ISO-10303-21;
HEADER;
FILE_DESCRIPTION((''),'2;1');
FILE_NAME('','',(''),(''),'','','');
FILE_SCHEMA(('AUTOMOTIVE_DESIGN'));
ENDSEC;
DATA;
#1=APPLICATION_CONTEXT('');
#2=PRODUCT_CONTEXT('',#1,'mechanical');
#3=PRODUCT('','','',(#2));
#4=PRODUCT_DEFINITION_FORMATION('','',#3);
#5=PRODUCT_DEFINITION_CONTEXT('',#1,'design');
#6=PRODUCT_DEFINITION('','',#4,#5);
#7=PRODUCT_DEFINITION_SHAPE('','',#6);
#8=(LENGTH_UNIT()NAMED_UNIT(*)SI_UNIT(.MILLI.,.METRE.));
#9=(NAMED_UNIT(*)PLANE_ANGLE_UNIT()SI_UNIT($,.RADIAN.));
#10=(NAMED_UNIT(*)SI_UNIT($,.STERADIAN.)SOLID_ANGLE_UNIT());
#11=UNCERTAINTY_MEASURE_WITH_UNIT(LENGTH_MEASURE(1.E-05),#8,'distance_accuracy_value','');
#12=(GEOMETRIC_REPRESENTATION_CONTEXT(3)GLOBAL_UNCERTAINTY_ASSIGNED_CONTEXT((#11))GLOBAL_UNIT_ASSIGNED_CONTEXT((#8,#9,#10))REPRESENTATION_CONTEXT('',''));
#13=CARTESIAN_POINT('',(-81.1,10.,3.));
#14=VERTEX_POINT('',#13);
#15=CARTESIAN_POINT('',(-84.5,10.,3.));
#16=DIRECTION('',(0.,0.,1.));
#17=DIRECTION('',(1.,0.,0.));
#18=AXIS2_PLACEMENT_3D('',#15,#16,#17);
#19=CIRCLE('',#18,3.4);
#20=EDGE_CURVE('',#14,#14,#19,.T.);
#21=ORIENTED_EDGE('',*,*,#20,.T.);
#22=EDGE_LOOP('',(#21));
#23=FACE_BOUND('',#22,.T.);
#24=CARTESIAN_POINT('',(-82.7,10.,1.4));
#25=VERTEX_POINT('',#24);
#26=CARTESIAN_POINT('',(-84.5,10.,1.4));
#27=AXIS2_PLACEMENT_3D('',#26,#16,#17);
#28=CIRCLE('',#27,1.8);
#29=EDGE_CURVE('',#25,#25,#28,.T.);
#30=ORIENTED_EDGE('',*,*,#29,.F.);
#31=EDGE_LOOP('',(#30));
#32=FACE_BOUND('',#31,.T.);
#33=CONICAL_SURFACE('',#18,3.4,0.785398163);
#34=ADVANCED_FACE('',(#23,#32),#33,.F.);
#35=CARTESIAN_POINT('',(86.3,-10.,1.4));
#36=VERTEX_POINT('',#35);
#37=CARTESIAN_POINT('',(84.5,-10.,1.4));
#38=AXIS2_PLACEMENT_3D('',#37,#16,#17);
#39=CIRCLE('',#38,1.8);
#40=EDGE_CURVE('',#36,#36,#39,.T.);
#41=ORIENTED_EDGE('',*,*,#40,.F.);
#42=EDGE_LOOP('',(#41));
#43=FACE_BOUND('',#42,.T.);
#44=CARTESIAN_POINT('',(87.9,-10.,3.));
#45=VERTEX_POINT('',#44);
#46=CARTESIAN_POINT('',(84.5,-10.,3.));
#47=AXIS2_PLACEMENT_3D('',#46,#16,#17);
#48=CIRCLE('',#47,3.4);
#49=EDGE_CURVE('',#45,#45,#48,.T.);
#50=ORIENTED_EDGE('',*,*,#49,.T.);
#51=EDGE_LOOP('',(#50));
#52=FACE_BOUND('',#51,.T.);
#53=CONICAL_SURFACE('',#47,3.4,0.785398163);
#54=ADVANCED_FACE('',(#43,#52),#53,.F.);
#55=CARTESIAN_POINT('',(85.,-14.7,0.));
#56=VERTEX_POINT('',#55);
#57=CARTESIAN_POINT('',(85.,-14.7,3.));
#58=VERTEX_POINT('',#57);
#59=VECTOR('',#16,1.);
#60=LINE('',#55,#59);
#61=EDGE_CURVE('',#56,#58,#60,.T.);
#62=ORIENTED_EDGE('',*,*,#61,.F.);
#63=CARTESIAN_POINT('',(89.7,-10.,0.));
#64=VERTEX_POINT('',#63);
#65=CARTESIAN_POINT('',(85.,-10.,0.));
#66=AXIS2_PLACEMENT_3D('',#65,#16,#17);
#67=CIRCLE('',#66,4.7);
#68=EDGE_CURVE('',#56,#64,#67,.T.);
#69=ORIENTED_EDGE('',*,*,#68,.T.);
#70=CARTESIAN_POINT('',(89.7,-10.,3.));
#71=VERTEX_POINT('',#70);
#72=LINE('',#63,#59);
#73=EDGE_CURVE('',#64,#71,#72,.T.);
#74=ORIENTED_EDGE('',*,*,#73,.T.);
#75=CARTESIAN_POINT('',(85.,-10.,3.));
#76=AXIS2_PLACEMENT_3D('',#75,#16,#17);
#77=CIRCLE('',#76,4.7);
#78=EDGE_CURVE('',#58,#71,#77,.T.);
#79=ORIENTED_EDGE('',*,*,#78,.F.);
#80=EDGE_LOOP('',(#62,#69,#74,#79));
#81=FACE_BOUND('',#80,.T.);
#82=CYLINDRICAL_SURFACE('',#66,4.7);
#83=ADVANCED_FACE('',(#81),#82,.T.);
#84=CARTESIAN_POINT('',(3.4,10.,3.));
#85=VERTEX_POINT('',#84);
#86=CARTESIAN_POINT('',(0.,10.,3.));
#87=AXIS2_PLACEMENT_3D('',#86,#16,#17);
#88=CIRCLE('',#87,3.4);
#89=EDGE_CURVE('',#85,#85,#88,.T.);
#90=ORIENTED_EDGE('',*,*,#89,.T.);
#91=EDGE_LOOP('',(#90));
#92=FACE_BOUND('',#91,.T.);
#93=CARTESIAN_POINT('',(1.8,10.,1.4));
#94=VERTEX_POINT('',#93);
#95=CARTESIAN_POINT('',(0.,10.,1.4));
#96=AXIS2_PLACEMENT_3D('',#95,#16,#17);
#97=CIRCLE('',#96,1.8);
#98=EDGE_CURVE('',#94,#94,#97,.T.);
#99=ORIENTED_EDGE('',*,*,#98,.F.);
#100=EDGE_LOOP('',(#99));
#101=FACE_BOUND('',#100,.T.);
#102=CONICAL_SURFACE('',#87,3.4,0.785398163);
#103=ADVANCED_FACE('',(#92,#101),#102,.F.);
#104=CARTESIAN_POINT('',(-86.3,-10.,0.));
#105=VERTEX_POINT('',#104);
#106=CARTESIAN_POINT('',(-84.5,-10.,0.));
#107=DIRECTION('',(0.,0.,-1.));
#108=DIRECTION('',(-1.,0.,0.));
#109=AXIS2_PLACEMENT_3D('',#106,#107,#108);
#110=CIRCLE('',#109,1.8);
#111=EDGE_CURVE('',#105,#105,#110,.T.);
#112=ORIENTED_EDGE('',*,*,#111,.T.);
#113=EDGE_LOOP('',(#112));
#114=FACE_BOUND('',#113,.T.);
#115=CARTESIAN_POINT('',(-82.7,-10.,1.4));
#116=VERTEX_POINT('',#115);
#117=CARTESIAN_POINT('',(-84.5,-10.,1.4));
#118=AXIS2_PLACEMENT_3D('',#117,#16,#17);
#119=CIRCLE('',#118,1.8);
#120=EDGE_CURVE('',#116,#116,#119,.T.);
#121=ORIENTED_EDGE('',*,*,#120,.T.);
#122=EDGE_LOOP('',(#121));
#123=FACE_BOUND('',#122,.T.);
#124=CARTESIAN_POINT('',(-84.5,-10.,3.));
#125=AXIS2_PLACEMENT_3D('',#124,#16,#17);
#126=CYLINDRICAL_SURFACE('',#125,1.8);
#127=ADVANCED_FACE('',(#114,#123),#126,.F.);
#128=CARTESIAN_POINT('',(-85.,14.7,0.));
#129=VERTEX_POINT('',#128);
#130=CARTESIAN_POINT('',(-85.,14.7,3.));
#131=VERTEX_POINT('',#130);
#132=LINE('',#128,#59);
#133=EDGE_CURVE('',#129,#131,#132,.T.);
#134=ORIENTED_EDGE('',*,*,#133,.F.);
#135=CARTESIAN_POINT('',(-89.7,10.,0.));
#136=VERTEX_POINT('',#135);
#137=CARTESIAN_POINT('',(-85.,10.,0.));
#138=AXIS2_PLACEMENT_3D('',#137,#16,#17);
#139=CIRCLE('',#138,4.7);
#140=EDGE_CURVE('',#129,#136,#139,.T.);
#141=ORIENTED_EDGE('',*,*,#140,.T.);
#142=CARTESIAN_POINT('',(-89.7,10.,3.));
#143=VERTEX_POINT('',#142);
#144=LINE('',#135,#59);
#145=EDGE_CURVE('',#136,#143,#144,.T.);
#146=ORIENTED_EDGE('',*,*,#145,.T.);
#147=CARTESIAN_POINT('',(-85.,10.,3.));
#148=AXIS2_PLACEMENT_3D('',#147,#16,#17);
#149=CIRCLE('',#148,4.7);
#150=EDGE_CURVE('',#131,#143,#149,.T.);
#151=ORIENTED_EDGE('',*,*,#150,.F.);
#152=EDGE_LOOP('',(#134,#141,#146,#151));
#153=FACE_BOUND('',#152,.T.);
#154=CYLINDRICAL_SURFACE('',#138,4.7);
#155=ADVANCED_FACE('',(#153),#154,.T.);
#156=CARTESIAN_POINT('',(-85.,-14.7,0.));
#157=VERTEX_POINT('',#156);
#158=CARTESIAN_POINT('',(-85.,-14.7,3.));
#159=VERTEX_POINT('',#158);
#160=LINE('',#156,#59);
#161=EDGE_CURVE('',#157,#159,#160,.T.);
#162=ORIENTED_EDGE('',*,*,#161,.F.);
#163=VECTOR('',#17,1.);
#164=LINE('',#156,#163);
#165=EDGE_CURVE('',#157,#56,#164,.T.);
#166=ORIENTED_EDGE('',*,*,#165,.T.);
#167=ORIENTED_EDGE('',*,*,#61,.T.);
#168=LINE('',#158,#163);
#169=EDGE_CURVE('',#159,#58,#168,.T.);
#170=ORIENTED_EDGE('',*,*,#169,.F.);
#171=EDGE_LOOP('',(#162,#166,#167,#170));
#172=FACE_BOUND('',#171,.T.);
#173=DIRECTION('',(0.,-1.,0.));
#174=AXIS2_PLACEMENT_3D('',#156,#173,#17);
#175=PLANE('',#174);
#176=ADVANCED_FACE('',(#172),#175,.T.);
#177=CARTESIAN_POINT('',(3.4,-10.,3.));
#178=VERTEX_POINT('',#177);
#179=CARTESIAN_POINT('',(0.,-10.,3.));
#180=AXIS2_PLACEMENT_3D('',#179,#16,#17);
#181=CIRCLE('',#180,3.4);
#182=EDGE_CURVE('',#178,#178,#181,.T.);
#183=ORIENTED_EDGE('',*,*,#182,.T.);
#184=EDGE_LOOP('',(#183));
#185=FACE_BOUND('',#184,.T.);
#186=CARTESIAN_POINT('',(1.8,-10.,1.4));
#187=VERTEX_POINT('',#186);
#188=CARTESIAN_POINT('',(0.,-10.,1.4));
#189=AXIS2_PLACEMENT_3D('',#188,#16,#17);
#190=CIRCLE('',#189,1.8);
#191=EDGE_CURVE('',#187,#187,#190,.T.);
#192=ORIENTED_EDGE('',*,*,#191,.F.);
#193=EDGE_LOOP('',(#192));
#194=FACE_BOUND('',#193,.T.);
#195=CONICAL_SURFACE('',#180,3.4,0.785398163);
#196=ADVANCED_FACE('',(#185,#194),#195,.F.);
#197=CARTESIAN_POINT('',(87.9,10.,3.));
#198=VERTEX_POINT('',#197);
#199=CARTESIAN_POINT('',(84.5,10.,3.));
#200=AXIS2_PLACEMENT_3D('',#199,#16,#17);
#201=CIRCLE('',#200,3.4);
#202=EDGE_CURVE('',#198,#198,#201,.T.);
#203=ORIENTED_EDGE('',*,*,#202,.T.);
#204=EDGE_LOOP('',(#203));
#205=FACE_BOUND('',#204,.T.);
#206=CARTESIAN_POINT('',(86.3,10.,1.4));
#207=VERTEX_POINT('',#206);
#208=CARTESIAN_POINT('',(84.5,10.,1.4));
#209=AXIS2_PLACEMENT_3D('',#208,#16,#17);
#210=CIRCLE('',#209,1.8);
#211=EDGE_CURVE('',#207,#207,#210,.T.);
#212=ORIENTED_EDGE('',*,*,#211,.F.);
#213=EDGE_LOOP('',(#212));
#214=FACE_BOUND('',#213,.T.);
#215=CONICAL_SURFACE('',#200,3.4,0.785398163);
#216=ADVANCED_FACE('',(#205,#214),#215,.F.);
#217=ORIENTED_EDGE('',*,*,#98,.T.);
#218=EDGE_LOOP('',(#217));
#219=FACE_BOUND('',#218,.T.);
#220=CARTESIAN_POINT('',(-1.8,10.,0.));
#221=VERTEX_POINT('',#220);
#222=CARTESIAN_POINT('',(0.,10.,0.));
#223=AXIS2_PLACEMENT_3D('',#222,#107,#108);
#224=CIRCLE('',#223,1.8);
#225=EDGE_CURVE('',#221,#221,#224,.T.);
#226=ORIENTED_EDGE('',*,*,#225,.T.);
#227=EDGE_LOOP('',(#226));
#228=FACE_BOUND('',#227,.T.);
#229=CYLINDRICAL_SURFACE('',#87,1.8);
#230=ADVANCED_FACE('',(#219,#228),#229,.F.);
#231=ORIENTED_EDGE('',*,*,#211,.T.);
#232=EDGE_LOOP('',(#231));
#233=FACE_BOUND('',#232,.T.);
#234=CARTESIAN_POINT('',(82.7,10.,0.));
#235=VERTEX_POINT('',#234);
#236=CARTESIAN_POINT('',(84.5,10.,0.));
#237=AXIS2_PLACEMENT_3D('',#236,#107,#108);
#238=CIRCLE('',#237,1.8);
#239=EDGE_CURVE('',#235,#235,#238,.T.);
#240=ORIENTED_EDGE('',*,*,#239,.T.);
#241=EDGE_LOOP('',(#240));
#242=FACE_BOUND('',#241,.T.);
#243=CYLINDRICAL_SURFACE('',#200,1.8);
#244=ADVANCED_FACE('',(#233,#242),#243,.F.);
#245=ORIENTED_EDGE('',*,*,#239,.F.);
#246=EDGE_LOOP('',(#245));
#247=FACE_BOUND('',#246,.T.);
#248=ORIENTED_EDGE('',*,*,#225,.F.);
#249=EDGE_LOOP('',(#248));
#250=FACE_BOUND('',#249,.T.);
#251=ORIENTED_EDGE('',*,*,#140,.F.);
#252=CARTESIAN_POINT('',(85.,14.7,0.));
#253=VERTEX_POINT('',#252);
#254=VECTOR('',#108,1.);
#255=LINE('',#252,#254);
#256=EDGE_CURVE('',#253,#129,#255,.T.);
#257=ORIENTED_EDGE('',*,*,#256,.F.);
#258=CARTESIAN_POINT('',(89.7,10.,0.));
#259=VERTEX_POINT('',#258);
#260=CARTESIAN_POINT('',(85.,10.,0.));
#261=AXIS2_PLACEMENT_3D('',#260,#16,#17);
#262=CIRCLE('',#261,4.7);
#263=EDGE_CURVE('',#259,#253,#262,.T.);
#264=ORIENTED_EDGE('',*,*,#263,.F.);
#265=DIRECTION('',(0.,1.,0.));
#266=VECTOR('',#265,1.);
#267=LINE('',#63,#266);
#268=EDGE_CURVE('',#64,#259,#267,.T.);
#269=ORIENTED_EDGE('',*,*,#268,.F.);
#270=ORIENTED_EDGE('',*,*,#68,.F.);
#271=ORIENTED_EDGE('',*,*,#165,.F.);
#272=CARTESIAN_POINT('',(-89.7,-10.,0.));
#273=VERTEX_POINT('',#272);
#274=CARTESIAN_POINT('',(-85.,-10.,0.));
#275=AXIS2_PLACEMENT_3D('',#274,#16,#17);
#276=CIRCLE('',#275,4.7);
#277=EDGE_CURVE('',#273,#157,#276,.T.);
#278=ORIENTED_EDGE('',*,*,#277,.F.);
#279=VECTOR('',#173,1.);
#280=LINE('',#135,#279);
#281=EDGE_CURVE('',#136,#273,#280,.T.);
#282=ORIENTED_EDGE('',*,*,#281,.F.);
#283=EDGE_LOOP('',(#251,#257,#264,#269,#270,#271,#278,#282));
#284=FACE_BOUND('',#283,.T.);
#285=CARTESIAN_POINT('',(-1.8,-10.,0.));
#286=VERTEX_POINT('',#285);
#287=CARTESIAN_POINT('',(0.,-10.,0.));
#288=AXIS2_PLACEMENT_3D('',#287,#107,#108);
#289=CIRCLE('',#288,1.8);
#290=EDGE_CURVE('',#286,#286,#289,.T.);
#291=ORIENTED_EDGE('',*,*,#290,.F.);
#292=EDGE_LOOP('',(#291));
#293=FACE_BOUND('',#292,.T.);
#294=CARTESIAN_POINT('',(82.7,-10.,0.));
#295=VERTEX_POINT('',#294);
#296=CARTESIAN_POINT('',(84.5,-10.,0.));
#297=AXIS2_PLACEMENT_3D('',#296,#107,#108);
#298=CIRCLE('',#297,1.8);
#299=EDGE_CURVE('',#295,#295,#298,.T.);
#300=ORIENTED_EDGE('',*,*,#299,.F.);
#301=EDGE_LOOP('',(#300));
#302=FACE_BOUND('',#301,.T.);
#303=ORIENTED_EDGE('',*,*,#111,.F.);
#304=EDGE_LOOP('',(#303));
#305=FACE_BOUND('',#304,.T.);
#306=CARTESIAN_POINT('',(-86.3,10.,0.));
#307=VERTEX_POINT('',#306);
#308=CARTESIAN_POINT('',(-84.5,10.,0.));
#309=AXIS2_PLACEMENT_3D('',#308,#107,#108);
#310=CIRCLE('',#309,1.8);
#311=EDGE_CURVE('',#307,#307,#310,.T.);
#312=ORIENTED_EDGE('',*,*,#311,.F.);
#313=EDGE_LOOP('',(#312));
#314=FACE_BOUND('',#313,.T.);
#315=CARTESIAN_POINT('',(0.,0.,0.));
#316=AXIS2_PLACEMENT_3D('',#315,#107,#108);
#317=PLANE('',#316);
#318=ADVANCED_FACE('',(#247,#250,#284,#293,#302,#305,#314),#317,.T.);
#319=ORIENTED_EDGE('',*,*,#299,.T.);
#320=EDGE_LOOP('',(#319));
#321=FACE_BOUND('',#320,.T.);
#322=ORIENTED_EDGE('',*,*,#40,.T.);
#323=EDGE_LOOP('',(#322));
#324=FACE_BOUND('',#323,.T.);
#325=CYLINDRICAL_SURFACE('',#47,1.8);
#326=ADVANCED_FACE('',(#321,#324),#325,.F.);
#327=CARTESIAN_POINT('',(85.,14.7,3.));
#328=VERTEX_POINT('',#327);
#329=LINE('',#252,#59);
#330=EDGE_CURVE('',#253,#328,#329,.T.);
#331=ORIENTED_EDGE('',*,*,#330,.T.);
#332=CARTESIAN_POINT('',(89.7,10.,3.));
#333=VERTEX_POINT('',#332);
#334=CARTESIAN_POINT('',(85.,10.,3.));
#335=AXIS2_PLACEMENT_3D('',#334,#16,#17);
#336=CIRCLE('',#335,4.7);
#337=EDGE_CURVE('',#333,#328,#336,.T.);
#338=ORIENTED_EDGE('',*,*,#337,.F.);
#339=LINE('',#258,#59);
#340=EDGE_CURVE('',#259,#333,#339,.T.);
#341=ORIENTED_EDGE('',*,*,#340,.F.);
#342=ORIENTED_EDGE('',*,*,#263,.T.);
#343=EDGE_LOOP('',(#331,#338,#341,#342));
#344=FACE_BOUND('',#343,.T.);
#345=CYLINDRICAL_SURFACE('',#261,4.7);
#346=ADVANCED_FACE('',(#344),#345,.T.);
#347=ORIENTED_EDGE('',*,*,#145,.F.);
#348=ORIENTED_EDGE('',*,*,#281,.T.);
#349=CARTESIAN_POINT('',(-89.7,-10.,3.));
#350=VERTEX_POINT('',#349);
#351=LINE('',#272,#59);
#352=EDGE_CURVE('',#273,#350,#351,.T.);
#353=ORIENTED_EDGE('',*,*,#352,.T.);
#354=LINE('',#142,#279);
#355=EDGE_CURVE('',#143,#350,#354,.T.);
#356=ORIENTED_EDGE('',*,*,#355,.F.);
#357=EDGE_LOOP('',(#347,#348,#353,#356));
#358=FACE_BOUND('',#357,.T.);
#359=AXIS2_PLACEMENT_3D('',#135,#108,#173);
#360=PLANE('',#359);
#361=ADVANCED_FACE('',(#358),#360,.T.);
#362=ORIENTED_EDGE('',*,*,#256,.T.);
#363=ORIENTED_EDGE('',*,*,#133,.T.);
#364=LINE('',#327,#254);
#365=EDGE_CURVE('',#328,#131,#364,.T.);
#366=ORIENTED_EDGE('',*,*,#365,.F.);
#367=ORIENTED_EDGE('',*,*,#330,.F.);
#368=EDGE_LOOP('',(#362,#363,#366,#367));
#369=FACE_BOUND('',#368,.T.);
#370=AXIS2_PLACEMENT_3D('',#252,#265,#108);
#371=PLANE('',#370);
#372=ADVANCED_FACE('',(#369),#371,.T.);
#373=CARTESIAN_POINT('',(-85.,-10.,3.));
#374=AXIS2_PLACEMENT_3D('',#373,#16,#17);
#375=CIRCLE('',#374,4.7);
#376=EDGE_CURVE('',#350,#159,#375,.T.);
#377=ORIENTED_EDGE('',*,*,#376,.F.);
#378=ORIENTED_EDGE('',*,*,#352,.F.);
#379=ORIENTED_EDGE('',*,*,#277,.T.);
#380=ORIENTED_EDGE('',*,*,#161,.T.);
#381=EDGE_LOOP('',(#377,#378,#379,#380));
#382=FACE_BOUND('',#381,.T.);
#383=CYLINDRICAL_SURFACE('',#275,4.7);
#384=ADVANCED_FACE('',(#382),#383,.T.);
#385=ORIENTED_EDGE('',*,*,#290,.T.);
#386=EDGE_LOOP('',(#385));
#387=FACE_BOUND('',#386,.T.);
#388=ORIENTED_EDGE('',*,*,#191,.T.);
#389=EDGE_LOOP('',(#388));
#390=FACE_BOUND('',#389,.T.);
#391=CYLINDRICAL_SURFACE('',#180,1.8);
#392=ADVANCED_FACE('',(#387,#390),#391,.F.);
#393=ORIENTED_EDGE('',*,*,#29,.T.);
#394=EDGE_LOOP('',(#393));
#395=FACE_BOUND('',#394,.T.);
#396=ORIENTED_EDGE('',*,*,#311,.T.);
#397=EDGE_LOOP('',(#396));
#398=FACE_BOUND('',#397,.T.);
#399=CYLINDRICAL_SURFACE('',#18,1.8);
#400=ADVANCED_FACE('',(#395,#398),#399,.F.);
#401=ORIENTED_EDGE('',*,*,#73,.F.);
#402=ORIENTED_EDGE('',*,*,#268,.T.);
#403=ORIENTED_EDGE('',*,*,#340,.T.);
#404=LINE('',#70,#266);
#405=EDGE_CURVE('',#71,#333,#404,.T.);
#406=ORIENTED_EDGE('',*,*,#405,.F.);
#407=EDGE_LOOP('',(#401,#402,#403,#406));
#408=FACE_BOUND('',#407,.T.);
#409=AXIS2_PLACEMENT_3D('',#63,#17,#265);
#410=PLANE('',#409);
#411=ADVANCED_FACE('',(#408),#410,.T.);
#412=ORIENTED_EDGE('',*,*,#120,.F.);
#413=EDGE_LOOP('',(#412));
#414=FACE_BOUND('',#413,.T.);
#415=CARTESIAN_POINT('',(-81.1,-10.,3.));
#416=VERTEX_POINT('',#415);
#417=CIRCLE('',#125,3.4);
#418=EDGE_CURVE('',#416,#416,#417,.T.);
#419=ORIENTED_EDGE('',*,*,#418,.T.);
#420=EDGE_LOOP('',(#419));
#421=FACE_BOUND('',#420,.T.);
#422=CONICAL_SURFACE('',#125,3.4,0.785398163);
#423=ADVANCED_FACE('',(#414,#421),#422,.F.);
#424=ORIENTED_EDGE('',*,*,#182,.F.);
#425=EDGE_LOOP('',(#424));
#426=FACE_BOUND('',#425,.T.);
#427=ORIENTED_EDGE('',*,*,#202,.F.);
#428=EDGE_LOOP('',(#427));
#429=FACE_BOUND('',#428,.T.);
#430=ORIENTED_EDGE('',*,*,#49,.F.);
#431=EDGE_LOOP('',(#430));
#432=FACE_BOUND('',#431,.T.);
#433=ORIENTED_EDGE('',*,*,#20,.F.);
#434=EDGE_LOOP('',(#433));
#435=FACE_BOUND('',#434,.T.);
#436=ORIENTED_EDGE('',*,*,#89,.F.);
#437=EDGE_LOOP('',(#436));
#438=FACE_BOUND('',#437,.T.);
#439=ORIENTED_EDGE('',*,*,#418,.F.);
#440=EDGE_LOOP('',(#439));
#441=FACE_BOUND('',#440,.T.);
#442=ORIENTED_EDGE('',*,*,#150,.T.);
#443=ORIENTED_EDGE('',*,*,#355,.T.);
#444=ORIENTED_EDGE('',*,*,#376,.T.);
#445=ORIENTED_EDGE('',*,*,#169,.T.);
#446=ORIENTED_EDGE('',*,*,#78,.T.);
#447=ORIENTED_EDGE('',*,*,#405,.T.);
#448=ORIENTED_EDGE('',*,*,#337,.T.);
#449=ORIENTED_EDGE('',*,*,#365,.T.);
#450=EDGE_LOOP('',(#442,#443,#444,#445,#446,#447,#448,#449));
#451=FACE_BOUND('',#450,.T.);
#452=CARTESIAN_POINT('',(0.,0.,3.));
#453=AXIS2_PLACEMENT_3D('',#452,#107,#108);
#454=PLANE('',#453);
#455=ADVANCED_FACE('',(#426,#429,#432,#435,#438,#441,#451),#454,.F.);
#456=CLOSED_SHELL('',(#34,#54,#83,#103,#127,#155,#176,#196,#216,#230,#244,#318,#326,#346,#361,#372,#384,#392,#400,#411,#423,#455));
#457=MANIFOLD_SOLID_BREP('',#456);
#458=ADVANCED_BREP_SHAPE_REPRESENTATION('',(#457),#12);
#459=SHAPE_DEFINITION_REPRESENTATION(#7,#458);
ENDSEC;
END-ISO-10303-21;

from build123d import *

# Parameters (mm, degrees)
SKETCH1_W           = 180
SKETCH1_H           = 30
BOSS_EXTRUDE1_DEPTH = 3
FILLET1_R           = 5
CUT_EXTRUDE1_DEPTH  = 92.290744328


# Read off the part's stored shape, not the designer's step: CSK for M3 Flat Head Machine Screw1
with BuildPart() as part:
    # Sketch1 → Boss-Extrude1 (new body)
    with BuildSketch(Plane.XY):
        Rectangle(SKETCH1_W, SKETCH1_H)
    extrude(amount=BOSS_EXTRUDE1_DEPTH)

    # Fillet1
    fillet1_edges = [part.edges().sort_by_distance(p)[0] for p in [
        (90, -15, 1.5),
        (-90, -15, 1.5),
        (-90, 15, 1.5),
        (90, 15, 1.5),
    ]]
    fillet(fillet1_edges, radius=FILLET1_R)

    # CSK for M3 Flat Head Machine Screw1 outl → CSK for M3 Flat Head Machine Screw1 (revolve, cut)
    with BuildSketch(Plane.XZ.offset(10)):
        Polygon((0, 0), (1.8, 0), (1.8, 1.4), (3.4, 3), (0, 3), align=None)
    revolve(axis=Axis((0, -10, 0), (0, 0, 1)), mode=Mode.SUBTRACT)

    # CSK for M3 Flat Head Machine Screw1 2 ou → CSK for M3 Flat Head Machine Screw1 2 (revolve, cut)
    with BuildSketch(Plane.XZ.offset(-10)):
        Polygon((0, 0), (1.8, 0), (1.8, 1.4), (3.4, 3), (0, 3), align=None)
    revolve(axis=Axis((0, 10, 0), (0, 0, 1)), mode=Mode.SUBTRACT)

    # CSK for M3 Flat Head Machine Screw1 3 ou → CSK for M3 Flat Head Machine Screw1 3 (revolve, cut)
    with BuildSketch(Plane(origin=(-84.5, -10, 0), x_dir=(1, 0, 0), z_dir=(0, -1, 0))):
        Polygon((0, 0), (1.8, 0), (1.8, 1.4), (3.4, 3), (0, 3), align=None)
    revolve(axis=Axis((-84.5, -10, 0), (0, 0, 1)), mode=Mode.SUBTRACT)

    # CSK for M3 Flat Head Machine Screw1 4 ou → CSK for M3 Flat Head Machine Screw1 4 (revolve, cut)
    with BuildSketch(Plane(origin=(84.5, 10, 0), x_dir=(1, 0, 0), z_dir=(0, -1, 0))):
        Polygon((0, 0), (1.8, 0), (1.8, 1.4), (3.4, 3), (0, 3), align=None)
    revolve(axis=Axis((84.5, 10, 0), (0, 0, 1)), mode=Mode.SUBTRACT)

    # CSK for M3 Flat Head Machine Screw1 5 ou → CSK for M3 Flat Head Machine Screw1 5 (revolve, cut)
    with BuildSketch(Plane(origin=(84.5, -10, 0), x_dir=(1, 0, 0), z_dir=(0, -1, 0))):
        Polygon((0, 0), (1.8, 0), (1.8, 1.4), (3.4, 3), (0, 3), align=None)
    revolve(axis=Axis((84.5, -10, 0), (0, 0, 1)), mode=Mode.SUBTRACT)

    # CSK for M3 Flat Head Machine Screw1 6 ou → CSK for M3 Flat Head Machine Screw1 6 (revolve, cut)
    with BuildSketch(Plane(origin=(-84.5, 10, 0), x_dir=(1, 0, 0), z_dir=(0, -1, 0))):
        Polygon((0, 0), (1.8, 0), (1.8, 1.4), (3.4, 3), (0, 3), align=None)
    revolve(axis=Axis((-84.5, 10, 0), (0, 0, 1)), mode=Mode.SUBTRACT)

    # Sketch5 → Cut-Extrude1 (cut, through all)
    with BuildSketch(Plane.XY.offset(3)):
        with BuildLine():
            Line((-85, -15), (85, -15))
            ThreePointArc((85, -15), (88.535533906, -13.535533906), (90, -10))
            Line((90, -10), (90, 10))
            ThreePointArc((90, 10), (88.535533906, 13.535533906), (85, 15))
            Line((85, 15), (-85, 15))
            ThreePointArc((-85, 15), (-88.535533906, 13.535533906), (-90, 10))
            Line((-90, 10), (-90, -10))
            ThreePointArc((-90, -10), (-88.535533906, -13.535533906), (-85, -15))
        make_face()
        with BuildLine():
            Line((-85, -14.7), (85, -14.7))
            ThreePointArc((85, -14.7), (88.323401872, -13.323401872), (89.7, -10))
            Line((89.7, -10), (89.7, 10))
            ThreePointArc((89.7, 10), (88.323401872, 13.323401872), (85, 14.7))
            Line((85, 14.7), (-85, 14.7))
            ThreePointArc((-85, 14.7), (-88.323401872, 13.323401872), (-89.7, 10))
            Line((-89.7, 10), (-89.7, -10))
            ThreePointArc((-89.7, -10), (-88.323401872, -13.323401872), (-85, -14.7))
        make_face(mode=Mode.SUBTRACT)
    extrude(amount=-CUT_EXTRUDE1_DEPTH, mode=Mode.SUBTRACT)


solid = part.part
